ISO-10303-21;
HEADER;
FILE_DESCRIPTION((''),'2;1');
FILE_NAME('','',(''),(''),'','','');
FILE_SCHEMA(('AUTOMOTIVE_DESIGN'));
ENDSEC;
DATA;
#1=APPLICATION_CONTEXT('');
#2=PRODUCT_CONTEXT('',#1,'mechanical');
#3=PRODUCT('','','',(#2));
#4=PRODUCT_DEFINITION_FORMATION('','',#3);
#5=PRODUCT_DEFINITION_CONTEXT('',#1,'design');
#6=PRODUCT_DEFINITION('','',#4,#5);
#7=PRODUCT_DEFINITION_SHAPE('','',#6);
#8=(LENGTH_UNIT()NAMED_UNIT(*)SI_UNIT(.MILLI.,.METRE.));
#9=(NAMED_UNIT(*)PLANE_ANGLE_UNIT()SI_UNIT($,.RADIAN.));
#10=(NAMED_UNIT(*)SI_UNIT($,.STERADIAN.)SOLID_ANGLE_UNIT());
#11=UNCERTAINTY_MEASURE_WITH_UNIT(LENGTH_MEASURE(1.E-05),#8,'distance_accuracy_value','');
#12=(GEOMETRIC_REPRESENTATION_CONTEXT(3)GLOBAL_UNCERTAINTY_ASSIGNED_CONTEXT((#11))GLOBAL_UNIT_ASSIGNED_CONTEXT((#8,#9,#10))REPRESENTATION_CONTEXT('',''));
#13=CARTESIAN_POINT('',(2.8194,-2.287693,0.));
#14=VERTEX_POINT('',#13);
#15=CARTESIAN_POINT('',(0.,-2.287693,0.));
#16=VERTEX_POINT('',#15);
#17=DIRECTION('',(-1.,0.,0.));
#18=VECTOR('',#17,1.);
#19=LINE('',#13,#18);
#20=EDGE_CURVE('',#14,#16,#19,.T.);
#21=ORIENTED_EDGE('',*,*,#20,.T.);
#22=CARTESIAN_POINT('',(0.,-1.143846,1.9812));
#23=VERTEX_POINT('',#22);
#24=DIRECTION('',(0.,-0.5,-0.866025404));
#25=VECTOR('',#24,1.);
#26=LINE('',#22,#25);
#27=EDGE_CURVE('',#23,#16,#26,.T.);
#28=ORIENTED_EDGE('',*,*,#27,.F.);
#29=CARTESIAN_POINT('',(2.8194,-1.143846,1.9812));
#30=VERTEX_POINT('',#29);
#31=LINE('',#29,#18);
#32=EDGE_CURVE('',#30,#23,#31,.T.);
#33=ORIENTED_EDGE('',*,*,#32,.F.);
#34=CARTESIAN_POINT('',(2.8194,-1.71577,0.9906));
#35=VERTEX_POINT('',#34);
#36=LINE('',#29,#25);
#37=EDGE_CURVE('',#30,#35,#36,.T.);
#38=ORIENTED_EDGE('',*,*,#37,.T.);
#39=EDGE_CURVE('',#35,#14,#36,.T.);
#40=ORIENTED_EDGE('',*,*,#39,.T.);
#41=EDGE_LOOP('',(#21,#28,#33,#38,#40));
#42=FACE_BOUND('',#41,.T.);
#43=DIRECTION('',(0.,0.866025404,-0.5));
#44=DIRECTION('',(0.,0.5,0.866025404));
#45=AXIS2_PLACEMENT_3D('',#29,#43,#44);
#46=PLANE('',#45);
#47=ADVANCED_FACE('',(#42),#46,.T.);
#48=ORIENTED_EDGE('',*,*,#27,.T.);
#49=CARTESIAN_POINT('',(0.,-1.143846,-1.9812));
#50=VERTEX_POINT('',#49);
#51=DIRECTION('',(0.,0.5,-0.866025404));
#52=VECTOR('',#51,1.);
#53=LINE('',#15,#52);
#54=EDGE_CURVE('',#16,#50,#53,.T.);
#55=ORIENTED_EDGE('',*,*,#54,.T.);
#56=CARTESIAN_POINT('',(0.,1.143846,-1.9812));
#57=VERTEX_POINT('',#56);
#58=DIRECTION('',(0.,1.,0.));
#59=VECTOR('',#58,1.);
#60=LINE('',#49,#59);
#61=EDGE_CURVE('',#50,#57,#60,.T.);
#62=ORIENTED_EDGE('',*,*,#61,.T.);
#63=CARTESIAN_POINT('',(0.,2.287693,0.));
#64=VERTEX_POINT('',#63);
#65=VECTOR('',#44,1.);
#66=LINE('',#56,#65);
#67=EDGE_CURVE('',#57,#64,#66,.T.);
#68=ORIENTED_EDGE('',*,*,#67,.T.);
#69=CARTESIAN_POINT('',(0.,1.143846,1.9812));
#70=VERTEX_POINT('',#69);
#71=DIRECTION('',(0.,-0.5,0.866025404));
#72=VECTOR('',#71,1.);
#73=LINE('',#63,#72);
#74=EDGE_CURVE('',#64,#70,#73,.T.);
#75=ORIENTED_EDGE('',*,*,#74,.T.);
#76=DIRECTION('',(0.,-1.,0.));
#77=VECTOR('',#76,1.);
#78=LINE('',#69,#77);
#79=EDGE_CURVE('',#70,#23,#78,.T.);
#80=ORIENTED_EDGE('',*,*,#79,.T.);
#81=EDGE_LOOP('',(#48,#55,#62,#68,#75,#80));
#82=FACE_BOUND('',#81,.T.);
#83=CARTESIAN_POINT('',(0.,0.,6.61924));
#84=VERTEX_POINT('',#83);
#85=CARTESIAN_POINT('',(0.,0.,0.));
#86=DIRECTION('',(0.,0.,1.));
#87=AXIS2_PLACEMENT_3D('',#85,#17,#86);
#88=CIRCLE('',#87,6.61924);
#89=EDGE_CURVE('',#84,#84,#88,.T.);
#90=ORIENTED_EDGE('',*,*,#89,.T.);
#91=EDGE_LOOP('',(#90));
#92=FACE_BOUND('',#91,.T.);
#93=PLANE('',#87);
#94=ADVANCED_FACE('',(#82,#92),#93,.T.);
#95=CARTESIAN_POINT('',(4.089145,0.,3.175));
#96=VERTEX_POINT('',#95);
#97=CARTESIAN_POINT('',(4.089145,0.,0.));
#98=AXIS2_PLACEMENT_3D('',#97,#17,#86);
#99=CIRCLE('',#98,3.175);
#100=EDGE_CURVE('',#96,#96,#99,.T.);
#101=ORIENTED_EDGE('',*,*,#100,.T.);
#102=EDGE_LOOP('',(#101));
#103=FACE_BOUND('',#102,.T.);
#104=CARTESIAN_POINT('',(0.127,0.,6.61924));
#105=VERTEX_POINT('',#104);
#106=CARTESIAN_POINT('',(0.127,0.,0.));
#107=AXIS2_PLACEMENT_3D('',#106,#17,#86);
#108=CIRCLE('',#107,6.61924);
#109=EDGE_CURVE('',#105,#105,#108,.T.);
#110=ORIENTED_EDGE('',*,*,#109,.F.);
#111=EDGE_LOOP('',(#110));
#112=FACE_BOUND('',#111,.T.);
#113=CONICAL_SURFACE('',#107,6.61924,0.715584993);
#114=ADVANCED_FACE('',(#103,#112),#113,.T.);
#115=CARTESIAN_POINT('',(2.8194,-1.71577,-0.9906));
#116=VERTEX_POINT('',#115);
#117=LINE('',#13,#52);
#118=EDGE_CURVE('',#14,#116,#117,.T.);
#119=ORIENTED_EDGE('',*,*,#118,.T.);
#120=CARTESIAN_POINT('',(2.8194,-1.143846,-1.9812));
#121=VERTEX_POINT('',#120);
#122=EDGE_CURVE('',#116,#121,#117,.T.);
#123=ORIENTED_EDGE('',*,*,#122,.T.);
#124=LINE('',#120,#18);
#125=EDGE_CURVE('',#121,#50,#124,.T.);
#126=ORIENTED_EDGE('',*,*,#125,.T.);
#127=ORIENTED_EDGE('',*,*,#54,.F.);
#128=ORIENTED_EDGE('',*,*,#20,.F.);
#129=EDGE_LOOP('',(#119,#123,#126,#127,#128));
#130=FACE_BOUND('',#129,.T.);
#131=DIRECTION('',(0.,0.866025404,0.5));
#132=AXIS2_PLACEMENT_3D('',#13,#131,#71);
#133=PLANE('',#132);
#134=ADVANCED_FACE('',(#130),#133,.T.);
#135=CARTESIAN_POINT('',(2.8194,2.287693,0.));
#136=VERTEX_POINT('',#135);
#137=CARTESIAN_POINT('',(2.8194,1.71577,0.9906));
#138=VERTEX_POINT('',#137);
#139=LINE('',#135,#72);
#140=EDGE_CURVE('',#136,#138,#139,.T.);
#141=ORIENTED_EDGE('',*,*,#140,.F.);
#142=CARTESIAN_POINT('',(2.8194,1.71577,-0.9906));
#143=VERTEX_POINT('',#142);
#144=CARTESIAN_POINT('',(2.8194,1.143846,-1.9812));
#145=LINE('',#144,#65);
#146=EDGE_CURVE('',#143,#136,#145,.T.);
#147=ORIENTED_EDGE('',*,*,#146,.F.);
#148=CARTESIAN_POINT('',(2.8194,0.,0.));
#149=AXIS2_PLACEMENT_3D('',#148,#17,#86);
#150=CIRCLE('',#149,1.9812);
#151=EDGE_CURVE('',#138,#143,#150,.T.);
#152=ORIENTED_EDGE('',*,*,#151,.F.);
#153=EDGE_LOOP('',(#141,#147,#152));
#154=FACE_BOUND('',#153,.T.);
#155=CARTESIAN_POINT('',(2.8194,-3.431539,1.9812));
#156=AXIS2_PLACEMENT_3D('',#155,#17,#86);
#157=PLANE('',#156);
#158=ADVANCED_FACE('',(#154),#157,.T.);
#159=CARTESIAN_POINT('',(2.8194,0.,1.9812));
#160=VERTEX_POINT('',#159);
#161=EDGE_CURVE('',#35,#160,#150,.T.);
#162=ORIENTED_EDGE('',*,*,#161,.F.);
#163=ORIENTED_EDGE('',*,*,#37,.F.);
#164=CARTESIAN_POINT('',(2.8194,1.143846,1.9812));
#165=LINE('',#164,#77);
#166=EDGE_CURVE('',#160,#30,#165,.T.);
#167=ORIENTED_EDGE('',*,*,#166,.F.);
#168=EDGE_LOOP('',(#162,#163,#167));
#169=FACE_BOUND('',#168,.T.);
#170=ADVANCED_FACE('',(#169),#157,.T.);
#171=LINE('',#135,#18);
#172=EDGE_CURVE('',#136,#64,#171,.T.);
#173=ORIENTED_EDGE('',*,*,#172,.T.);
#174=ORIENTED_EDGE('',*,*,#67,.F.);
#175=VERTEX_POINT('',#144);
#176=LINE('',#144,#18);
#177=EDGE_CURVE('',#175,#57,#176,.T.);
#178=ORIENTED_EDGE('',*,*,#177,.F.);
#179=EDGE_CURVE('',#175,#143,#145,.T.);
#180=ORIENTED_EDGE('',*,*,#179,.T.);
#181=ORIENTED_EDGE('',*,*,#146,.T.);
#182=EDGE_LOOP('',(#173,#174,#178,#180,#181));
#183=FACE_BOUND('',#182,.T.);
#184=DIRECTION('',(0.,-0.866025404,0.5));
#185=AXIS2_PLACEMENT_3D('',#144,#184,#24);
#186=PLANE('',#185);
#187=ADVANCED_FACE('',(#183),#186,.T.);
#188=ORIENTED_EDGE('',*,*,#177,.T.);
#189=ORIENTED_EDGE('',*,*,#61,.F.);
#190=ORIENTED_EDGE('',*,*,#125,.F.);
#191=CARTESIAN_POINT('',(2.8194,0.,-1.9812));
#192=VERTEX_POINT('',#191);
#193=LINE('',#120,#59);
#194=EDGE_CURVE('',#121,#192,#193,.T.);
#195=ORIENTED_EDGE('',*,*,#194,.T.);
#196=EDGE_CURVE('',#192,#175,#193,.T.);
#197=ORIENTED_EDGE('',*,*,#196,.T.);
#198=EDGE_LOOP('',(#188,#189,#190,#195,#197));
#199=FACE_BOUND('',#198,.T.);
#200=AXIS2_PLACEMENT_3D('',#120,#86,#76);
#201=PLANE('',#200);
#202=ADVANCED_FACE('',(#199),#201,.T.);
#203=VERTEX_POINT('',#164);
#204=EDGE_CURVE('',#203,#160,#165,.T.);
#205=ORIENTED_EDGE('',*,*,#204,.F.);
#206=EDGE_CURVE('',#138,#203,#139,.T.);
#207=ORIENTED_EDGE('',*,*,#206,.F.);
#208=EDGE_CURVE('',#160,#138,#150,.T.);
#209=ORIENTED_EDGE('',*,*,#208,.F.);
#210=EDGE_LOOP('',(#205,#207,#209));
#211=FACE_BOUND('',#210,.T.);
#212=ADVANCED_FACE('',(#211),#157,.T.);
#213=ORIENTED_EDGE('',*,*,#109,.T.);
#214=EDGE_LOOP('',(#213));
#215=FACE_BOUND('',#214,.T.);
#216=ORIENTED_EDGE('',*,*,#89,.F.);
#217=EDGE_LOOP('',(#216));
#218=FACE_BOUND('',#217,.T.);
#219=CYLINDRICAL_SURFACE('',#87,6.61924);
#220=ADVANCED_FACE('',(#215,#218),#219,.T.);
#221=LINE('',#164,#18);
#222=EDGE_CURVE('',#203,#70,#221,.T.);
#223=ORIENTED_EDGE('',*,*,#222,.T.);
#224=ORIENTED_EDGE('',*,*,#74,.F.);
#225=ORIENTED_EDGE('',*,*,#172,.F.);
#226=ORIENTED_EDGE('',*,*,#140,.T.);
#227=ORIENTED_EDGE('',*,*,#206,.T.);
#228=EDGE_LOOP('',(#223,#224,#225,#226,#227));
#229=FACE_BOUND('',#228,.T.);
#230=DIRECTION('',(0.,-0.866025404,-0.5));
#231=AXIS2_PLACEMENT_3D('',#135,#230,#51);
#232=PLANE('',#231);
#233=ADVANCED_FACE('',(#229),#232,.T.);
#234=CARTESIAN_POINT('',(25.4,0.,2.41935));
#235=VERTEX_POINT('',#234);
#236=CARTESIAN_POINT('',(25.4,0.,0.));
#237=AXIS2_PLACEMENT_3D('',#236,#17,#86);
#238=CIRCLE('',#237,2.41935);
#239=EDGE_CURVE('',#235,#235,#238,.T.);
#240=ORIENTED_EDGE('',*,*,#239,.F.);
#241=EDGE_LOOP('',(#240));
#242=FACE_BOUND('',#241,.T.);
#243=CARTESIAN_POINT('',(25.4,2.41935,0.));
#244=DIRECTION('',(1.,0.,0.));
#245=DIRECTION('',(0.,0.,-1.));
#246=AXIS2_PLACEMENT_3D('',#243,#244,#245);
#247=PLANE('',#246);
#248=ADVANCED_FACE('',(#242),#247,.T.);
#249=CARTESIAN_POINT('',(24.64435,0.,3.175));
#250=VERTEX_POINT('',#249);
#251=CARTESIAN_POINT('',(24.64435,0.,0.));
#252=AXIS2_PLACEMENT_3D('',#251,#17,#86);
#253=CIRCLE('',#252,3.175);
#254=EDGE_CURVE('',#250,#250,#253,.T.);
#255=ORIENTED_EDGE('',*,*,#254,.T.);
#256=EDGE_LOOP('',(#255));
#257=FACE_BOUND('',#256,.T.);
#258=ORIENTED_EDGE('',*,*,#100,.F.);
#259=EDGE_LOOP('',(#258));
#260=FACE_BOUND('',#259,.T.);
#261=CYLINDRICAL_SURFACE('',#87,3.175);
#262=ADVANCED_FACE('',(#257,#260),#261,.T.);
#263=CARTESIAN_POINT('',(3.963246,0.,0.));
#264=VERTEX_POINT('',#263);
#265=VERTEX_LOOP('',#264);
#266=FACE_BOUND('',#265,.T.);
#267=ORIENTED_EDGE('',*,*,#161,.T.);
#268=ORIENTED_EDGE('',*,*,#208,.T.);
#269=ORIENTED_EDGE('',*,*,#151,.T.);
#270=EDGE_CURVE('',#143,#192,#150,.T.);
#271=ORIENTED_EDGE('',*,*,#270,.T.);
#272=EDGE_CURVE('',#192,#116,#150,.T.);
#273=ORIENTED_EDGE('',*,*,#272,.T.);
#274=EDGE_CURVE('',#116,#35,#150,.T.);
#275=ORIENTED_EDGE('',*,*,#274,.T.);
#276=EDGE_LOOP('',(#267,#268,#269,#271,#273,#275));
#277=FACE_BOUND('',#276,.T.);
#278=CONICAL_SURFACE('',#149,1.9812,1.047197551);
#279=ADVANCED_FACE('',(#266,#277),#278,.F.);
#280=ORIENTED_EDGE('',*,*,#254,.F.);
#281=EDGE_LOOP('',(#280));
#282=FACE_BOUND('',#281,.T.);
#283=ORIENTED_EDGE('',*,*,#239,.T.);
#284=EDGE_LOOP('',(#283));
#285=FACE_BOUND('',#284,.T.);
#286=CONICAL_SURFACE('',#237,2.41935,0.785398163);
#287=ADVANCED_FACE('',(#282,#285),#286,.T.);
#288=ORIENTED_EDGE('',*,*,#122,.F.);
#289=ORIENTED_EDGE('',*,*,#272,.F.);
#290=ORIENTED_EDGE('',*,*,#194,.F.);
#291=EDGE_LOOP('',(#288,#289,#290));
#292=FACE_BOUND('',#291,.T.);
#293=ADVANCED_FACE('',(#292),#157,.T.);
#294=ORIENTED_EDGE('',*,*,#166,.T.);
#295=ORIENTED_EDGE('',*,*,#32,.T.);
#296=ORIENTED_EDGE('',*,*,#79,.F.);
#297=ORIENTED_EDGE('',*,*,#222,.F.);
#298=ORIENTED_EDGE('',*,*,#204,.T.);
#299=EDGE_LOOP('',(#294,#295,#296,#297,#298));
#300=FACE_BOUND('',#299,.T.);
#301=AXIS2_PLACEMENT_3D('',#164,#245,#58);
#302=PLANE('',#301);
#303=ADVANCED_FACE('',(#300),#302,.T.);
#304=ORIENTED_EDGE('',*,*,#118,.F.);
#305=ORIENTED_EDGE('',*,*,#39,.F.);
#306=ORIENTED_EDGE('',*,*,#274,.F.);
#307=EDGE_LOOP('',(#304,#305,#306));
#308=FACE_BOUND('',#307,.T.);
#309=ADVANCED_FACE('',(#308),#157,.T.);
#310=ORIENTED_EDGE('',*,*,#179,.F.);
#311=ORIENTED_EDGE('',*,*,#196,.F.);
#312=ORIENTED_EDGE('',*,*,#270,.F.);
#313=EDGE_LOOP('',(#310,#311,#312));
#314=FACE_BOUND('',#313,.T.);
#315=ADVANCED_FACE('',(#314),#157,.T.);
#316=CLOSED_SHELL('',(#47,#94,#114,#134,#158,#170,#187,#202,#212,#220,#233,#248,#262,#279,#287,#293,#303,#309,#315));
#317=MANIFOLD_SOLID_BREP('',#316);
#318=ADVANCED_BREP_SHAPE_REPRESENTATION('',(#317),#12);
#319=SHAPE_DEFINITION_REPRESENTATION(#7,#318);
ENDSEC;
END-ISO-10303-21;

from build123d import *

# Parameters (mm, degrees)
HEX_START   = -2.8194
HEX_2_DEPTH = 2.8194


with BuildPart() as part:
    # BodySke → BaseBody (revolve)
    with BuildSketch(Plane.XY, mode=Mode.PRIVATE) as basebody_sk:
        Polygon((0, 0), (0, 6.61924), (0.127, 6.61924), (4.089144883, 3.175), (24.64435, 3.175), (25.4, 2.41935), (25.4, 0), align=None)
    revolve(basebody_sk.sketch.rotate(Axis((0, 0, 0), (1, 0, 0)), 90), axis=Axis((0, 0, 0), (1, 0, 0)))

    # Hex 2: read off the stored shape, not the designer's step
    # Hex 2 outline → Hex 2 (cut)
    with BuildSketch(Plane.ZY.offset(HEX_START)):
        Polygon((-1.9812, -1.143846353), (0, -2.287692707), (1.9812, -1.143846353), (1.9812, 1.143846353), (0, 2.287692707), (-1.9812, 1.143846353), align=None)
    extrude(amount=HEX_2_DEPTH, mode=Mode.SUBTRACT)

    # Hex 2 2 outline → Hex 2 2 (revolve, cut)
    with BuildSketch(Plane.YX):
        Polygon((1.9812, 2.8194), (0, 3.963246353), (0, 2.8194), align=None)
    revolve(axis=Axis((0, 0, 0), (1, 0, 0)), mode=Mode.SUBTRACT)


solid = part.part
